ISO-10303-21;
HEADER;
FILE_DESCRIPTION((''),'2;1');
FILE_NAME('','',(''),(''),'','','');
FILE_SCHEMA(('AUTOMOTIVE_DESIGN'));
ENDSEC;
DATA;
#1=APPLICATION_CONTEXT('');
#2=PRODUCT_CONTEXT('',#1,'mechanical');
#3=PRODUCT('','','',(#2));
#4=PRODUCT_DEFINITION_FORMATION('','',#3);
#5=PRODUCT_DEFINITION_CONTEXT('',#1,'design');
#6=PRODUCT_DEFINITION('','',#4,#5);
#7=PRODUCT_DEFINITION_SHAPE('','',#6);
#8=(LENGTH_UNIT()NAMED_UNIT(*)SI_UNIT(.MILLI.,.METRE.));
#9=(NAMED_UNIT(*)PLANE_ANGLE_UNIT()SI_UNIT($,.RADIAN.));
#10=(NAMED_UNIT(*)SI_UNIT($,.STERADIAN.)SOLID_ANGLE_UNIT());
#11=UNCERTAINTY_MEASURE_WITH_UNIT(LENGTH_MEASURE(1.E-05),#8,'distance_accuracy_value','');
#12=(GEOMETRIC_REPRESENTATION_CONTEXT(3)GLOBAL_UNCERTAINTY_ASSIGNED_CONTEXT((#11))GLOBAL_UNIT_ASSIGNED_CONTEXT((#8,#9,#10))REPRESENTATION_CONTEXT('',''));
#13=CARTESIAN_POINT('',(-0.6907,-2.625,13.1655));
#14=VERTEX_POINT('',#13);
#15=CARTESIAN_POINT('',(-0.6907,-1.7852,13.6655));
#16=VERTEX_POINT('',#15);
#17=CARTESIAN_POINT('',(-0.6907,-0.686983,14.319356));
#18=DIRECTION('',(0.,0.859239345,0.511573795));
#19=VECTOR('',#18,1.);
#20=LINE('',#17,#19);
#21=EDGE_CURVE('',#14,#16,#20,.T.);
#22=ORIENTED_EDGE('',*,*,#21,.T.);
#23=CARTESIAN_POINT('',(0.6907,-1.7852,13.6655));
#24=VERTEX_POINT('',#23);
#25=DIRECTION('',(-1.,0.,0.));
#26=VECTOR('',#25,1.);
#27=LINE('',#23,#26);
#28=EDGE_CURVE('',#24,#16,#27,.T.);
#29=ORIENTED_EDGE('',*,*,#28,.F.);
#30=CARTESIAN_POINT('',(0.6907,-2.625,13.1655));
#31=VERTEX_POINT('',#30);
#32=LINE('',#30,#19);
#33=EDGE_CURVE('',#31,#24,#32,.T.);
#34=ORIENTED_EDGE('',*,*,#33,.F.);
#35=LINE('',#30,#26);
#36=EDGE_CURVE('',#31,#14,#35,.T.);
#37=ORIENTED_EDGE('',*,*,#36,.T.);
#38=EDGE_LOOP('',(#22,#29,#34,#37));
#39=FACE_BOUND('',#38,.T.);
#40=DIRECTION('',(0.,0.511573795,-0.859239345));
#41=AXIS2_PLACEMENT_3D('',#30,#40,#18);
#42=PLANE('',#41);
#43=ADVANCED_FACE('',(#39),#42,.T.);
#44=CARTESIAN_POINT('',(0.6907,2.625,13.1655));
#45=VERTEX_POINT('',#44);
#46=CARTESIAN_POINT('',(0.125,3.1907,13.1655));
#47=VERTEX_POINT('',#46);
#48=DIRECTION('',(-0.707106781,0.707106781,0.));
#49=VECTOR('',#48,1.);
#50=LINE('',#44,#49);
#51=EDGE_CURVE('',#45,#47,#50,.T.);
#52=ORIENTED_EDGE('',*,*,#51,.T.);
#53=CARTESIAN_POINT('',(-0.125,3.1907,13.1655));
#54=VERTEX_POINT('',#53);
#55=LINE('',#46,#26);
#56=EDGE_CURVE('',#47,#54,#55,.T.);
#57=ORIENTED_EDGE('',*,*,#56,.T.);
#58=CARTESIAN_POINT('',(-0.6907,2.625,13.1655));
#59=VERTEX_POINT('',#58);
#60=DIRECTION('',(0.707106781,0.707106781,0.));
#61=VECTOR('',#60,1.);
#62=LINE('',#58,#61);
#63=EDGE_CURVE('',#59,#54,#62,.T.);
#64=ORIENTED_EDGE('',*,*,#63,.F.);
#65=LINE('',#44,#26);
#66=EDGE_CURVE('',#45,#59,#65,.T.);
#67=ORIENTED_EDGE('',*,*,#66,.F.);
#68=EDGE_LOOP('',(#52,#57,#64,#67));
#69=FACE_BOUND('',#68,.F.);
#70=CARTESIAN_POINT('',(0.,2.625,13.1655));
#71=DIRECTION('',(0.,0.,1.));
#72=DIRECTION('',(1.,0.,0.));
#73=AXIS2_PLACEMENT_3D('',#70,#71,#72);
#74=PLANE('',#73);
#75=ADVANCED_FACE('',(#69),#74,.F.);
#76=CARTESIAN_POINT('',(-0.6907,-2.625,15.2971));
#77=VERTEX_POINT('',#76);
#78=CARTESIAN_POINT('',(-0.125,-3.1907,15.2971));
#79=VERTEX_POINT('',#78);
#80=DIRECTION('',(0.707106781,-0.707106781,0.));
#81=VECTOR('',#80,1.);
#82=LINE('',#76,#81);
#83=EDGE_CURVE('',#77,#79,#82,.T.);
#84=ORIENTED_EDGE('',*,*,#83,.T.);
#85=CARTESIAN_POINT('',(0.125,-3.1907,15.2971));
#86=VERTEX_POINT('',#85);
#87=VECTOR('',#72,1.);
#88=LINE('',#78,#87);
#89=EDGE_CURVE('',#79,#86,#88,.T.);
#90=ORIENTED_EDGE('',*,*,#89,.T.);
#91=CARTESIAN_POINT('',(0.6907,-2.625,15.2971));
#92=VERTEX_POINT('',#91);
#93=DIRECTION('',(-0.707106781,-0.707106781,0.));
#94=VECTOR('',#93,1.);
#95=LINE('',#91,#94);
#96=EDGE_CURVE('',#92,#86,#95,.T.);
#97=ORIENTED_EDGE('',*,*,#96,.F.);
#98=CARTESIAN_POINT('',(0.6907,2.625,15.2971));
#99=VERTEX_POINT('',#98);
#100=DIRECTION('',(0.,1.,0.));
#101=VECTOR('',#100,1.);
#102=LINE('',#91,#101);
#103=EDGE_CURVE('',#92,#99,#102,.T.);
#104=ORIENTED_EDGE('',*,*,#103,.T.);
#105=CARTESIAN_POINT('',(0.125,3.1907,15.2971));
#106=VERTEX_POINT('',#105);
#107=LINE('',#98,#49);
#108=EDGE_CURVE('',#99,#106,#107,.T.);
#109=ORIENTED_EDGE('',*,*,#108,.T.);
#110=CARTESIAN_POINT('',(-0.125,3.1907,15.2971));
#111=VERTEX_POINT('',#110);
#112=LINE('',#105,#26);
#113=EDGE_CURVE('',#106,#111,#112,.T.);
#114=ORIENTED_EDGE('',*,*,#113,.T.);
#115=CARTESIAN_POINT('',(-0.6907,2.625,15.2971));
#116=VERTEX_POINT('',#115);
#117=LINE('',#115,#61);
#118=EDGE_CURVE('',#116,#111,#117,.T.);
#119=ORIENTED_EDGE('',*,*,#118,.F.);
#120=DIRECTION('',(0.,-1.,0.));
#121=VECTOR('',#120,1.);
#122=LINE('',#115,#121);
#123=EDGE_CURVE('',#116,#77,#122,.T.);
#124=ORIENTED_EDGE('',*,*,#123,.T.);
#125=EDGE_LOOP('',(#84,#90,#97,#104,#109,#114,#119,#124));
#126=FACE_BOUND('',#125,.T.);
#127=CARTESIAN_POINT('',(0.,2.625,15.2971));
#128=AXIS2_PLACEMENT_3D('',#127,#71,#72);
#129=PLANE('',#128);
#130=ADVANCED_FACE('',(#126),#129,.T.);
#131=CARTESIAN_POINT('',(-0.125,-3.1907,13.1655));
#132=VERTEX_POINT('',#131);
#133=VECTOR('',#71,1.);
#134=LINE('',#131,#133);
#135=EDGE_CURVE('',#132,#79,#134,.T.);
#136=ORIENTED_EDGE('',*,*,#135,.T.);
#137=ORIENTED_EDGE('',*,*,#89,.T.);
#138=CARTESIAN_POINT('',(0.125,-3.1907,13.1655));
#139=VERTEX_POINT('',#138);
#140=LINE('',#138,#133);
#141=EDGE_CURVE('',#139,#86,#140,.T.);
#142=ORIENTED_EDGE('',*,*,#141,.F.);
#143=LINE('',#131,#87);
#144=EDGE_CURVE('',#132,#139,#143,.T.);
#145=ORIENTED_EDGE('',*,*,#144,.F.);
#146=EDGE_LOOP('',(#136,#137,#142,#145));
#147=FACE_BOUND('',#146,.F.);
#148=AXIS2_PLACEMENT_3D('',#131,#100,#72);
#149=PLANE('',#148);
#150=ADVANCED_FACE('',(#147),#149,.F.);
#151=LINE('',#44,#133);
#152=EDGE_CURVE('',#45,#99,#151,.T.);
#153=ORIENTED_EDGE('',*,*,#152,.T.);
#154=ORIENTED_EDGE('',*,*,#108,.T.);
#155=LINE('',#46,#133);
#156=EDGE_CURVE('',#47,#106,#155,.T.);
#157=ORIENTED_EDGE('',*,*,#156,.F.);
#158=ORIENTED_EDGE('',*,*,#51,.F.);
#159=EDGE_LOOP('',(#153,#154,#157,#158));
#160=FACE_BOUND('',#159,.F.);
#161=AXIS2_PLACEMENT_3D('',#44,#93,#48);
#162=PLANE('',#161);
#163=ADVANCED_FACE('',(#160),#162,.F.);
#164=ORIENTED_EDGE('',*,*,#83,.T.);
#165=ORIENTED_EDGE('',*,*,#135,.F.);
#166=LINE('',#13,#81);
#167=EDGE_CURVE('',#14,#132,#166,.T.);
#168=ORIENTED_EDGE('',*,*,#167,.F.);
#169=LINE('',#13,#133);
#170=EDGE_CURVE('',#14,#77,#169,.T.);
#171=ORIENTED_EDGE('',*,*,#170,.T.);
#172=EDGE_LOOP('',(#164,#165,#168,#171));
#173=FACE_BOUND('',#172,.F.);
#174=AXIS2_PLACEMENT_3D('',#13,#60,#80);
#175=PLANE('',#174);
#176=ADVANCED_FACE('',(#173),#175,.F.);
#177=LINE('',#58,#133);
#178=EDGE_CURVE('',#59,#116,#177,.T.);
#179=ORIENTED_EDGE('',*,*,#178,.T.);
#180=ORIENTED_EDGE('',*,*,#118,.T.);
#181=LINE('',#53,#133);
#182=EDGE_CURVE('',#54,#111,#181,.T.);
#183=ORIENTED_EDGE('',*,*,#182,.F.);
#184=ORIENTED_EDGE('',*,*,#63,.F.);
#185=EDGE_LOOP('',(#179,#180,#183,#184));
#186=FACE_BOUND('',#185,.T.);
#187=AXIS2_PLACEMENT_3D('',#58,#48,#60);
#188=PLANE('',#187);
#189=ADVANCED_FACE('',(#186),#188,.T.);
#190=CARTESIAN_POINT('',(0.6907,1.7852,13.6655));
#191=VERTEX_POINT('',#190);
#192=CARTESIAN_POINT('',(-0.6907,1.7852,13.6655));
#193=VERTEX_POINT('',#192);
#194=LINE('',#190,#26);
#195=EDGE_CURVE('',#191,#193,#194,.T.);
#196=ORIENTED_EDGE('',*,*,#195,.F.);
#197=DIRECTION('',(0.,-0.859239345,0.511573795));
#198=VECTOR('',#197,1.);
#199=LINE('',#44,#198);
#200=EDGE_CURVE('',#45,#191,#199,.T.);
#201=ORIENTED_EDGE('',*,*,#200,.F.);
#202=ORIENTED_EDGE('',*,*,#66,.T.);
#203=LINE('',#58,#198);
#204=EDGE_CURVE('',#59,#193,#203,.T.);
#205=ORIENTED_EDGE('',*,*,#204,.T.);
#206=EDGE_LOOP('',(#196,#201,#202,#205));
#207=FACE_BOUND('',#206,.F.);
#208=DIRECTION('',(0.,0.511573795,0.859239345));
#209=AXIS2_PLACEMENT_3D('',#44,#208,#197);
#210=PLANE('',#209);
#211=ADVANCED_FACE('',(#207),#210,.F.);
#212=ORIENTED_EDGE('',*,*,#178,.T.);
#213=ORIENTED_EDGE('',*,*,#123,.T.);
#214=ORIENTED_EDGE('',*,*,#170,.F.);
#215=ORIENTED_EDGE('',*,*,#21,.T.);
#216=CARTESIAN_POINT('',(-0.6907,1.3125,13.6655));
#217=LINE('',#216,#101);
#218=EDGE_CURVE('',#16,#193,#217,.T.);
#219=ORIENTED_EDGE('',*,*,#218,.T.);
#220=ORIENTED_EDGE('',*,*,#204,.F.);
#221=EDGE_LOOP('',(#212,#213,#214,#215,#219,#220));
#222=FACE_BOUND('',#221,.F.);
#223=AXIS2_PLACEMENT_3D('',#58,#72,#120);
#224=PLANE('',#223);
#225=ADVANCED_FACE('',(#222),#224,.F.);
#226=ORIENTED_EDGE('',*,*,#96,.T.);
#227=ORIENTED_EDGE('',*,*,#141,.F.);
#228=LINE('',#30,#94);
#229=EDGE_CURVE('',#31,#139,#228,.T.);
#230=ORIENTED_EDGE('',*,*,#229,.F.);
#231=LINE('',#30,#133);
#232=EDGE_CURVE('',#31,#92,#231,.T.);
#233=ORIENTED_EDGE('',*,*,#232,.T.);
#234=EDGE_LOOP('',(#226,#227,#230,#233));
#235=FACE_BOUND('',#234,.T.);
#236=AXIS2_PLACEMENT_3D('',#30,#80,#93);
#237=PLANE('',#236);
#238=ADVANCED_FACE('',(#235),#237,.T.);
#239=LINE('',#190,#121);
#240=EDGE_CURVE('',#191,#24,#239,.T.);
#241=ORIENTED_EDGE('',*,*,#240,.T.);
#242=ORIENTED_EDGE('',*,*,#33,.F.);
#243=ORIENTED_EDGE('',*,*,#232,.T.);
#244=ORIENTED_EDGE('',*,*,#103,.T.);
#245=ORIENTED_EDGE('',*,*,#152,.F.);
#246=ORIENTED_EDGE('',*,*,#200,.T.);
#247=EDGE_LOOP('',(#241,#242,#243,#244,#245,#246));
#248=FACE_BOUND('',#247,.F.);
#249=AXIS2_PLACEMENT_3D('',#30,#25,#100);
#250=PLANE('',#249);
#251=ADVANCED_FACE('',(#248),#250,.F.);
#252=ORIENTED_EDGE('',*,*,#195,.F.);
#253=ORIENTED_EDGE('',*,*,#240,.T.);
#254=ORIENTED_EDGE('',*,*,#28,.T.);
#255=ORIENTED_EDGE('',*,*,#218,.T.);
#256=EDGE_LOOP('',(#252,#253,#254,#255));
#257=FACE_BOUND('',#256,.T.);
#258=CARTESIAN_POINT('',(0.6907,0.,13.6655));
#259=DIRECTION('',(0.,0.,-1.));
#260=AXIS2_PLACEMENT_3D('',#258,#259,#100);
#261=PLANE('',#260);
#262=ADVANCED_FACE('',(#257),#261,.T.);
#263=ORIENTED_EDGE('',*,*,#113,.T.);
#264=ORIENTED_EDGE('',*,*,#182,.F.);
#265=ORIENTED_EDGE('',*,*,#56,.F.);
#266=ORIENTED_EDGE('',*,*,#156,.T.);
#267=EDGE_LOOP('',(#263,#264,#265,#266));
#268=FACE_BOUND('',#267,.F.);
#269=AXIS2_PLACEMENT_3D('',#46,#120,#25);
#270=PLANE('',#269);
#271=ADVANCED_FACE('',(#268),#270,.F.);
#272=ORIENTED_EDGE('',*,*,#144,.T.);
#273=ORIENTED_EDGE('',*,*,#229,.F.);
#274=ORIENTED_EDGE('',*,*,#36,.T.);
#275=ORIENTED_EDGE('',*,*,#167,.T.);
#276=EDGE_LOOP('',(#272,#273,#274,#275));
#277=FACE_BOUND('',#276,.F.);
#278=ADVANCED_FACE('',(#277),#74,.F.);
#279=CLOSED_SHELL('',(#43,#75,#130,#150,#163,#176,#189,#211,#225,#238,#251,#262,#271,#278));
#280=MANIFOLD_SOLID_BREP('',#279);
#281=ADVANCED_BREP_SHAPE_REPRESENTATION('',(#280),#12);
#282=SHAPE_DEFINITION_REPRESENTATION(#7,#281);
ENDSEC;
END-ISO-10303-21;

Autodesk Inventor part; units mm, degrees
ref_plane "YZ Plane" through (0, 0, 0) normal (1, 0, 0) x (0, 1, 0)
ref_plane "XZ Plane" through (0, 0, 0) normal (0, 1, 0) x (-1, 0, 0)
sketch "Sketch1" plane through (0, 0, 0) normal (1, 0, 0) x (0, 1, 0)
  line L0 (2.625, 15.2971) -> (2.625, 13.1655) projected
  line L1 (2.625, 13.1655) -> (3.1907, 13.1655) projected
  line L2 (3.1907, 13.1655) -> (3.1907, 15.2971) projected
  line L3 (3.1907, 15.2971) -> (2.625, 15.2971) projected
  point P0 (0, 0)
ref_plane "Work Plane2" through (0, 2.625, 13.1655) normal (0, 0, 1) x (1, 0, 0)
ref_plane "Work Plane1" through (0, 0, 0) normal (0, 0, 1) x (1, 0, 0)
sketch "Sketch2" plane through (0, 2.625, 13.1655) normal (0, 0, 1) x (1, 0, 0)
  line L0 (-0.6907, 0) -> (-0.125, 0.5657) projected
  line L1 (0.6907, 0) -> (0.125, 0.5657) projected
  line L2 (-0.6907, -5.25) -> (-0.125, -5.8157) projected
  line L3 (0.6907, -5.25) -> (0.125, -5.8157) projected
  line L4 (-0.6907, 0) -> (-0.6907, -5.25)
  line L5 (-0.125, -5.8157) -> (0.125, -5.8157)
  line L6 (0.6907, -5.25) -> (0.6907, 0)
  line L7 (0.125, 0.5657) -> (-0.125, 0.5657)
  point P0 (0, -2.625)
extrude "Extrusion1" add sketch "Sketch2" along normal up to surface (2.1316 mm away)
sketch "Sketch3" plane through (0.6907, -2.625, 13.1655) normal (1, 0, 0) x (0, 0, -1)
  line L0 (0, 5.25) -> (-2.3345, 8.1092) projected
  line L1 (0, 5.25) -> (0, 5.8157) projected
  line L2 (0, 5.25) -> (-0.5, 4.4102)
  line L3 (0, 5.25) -> (0, 0) projected
  line L4 (0, 2.625) -> (-0.5, 2.625)
  line L5 (0, 0) -> (-0.5, 0.8398)
  line L6 (0, 5.25) -> (-2.1316, 5.25) projected
  line L7 (0, 5.25) -> (0, 0)
  line L8 (-0.5, 0.8398) -> (-0.5, 4.4102)
  point P0 (13.1655, 2.625)
  dimension "d2" = 110
  dimension "d3" = 0.5
extrude "Extrusion2" cut sketch "Sketch3" against normal blind 10
properties part number "LegConnectorBase"
